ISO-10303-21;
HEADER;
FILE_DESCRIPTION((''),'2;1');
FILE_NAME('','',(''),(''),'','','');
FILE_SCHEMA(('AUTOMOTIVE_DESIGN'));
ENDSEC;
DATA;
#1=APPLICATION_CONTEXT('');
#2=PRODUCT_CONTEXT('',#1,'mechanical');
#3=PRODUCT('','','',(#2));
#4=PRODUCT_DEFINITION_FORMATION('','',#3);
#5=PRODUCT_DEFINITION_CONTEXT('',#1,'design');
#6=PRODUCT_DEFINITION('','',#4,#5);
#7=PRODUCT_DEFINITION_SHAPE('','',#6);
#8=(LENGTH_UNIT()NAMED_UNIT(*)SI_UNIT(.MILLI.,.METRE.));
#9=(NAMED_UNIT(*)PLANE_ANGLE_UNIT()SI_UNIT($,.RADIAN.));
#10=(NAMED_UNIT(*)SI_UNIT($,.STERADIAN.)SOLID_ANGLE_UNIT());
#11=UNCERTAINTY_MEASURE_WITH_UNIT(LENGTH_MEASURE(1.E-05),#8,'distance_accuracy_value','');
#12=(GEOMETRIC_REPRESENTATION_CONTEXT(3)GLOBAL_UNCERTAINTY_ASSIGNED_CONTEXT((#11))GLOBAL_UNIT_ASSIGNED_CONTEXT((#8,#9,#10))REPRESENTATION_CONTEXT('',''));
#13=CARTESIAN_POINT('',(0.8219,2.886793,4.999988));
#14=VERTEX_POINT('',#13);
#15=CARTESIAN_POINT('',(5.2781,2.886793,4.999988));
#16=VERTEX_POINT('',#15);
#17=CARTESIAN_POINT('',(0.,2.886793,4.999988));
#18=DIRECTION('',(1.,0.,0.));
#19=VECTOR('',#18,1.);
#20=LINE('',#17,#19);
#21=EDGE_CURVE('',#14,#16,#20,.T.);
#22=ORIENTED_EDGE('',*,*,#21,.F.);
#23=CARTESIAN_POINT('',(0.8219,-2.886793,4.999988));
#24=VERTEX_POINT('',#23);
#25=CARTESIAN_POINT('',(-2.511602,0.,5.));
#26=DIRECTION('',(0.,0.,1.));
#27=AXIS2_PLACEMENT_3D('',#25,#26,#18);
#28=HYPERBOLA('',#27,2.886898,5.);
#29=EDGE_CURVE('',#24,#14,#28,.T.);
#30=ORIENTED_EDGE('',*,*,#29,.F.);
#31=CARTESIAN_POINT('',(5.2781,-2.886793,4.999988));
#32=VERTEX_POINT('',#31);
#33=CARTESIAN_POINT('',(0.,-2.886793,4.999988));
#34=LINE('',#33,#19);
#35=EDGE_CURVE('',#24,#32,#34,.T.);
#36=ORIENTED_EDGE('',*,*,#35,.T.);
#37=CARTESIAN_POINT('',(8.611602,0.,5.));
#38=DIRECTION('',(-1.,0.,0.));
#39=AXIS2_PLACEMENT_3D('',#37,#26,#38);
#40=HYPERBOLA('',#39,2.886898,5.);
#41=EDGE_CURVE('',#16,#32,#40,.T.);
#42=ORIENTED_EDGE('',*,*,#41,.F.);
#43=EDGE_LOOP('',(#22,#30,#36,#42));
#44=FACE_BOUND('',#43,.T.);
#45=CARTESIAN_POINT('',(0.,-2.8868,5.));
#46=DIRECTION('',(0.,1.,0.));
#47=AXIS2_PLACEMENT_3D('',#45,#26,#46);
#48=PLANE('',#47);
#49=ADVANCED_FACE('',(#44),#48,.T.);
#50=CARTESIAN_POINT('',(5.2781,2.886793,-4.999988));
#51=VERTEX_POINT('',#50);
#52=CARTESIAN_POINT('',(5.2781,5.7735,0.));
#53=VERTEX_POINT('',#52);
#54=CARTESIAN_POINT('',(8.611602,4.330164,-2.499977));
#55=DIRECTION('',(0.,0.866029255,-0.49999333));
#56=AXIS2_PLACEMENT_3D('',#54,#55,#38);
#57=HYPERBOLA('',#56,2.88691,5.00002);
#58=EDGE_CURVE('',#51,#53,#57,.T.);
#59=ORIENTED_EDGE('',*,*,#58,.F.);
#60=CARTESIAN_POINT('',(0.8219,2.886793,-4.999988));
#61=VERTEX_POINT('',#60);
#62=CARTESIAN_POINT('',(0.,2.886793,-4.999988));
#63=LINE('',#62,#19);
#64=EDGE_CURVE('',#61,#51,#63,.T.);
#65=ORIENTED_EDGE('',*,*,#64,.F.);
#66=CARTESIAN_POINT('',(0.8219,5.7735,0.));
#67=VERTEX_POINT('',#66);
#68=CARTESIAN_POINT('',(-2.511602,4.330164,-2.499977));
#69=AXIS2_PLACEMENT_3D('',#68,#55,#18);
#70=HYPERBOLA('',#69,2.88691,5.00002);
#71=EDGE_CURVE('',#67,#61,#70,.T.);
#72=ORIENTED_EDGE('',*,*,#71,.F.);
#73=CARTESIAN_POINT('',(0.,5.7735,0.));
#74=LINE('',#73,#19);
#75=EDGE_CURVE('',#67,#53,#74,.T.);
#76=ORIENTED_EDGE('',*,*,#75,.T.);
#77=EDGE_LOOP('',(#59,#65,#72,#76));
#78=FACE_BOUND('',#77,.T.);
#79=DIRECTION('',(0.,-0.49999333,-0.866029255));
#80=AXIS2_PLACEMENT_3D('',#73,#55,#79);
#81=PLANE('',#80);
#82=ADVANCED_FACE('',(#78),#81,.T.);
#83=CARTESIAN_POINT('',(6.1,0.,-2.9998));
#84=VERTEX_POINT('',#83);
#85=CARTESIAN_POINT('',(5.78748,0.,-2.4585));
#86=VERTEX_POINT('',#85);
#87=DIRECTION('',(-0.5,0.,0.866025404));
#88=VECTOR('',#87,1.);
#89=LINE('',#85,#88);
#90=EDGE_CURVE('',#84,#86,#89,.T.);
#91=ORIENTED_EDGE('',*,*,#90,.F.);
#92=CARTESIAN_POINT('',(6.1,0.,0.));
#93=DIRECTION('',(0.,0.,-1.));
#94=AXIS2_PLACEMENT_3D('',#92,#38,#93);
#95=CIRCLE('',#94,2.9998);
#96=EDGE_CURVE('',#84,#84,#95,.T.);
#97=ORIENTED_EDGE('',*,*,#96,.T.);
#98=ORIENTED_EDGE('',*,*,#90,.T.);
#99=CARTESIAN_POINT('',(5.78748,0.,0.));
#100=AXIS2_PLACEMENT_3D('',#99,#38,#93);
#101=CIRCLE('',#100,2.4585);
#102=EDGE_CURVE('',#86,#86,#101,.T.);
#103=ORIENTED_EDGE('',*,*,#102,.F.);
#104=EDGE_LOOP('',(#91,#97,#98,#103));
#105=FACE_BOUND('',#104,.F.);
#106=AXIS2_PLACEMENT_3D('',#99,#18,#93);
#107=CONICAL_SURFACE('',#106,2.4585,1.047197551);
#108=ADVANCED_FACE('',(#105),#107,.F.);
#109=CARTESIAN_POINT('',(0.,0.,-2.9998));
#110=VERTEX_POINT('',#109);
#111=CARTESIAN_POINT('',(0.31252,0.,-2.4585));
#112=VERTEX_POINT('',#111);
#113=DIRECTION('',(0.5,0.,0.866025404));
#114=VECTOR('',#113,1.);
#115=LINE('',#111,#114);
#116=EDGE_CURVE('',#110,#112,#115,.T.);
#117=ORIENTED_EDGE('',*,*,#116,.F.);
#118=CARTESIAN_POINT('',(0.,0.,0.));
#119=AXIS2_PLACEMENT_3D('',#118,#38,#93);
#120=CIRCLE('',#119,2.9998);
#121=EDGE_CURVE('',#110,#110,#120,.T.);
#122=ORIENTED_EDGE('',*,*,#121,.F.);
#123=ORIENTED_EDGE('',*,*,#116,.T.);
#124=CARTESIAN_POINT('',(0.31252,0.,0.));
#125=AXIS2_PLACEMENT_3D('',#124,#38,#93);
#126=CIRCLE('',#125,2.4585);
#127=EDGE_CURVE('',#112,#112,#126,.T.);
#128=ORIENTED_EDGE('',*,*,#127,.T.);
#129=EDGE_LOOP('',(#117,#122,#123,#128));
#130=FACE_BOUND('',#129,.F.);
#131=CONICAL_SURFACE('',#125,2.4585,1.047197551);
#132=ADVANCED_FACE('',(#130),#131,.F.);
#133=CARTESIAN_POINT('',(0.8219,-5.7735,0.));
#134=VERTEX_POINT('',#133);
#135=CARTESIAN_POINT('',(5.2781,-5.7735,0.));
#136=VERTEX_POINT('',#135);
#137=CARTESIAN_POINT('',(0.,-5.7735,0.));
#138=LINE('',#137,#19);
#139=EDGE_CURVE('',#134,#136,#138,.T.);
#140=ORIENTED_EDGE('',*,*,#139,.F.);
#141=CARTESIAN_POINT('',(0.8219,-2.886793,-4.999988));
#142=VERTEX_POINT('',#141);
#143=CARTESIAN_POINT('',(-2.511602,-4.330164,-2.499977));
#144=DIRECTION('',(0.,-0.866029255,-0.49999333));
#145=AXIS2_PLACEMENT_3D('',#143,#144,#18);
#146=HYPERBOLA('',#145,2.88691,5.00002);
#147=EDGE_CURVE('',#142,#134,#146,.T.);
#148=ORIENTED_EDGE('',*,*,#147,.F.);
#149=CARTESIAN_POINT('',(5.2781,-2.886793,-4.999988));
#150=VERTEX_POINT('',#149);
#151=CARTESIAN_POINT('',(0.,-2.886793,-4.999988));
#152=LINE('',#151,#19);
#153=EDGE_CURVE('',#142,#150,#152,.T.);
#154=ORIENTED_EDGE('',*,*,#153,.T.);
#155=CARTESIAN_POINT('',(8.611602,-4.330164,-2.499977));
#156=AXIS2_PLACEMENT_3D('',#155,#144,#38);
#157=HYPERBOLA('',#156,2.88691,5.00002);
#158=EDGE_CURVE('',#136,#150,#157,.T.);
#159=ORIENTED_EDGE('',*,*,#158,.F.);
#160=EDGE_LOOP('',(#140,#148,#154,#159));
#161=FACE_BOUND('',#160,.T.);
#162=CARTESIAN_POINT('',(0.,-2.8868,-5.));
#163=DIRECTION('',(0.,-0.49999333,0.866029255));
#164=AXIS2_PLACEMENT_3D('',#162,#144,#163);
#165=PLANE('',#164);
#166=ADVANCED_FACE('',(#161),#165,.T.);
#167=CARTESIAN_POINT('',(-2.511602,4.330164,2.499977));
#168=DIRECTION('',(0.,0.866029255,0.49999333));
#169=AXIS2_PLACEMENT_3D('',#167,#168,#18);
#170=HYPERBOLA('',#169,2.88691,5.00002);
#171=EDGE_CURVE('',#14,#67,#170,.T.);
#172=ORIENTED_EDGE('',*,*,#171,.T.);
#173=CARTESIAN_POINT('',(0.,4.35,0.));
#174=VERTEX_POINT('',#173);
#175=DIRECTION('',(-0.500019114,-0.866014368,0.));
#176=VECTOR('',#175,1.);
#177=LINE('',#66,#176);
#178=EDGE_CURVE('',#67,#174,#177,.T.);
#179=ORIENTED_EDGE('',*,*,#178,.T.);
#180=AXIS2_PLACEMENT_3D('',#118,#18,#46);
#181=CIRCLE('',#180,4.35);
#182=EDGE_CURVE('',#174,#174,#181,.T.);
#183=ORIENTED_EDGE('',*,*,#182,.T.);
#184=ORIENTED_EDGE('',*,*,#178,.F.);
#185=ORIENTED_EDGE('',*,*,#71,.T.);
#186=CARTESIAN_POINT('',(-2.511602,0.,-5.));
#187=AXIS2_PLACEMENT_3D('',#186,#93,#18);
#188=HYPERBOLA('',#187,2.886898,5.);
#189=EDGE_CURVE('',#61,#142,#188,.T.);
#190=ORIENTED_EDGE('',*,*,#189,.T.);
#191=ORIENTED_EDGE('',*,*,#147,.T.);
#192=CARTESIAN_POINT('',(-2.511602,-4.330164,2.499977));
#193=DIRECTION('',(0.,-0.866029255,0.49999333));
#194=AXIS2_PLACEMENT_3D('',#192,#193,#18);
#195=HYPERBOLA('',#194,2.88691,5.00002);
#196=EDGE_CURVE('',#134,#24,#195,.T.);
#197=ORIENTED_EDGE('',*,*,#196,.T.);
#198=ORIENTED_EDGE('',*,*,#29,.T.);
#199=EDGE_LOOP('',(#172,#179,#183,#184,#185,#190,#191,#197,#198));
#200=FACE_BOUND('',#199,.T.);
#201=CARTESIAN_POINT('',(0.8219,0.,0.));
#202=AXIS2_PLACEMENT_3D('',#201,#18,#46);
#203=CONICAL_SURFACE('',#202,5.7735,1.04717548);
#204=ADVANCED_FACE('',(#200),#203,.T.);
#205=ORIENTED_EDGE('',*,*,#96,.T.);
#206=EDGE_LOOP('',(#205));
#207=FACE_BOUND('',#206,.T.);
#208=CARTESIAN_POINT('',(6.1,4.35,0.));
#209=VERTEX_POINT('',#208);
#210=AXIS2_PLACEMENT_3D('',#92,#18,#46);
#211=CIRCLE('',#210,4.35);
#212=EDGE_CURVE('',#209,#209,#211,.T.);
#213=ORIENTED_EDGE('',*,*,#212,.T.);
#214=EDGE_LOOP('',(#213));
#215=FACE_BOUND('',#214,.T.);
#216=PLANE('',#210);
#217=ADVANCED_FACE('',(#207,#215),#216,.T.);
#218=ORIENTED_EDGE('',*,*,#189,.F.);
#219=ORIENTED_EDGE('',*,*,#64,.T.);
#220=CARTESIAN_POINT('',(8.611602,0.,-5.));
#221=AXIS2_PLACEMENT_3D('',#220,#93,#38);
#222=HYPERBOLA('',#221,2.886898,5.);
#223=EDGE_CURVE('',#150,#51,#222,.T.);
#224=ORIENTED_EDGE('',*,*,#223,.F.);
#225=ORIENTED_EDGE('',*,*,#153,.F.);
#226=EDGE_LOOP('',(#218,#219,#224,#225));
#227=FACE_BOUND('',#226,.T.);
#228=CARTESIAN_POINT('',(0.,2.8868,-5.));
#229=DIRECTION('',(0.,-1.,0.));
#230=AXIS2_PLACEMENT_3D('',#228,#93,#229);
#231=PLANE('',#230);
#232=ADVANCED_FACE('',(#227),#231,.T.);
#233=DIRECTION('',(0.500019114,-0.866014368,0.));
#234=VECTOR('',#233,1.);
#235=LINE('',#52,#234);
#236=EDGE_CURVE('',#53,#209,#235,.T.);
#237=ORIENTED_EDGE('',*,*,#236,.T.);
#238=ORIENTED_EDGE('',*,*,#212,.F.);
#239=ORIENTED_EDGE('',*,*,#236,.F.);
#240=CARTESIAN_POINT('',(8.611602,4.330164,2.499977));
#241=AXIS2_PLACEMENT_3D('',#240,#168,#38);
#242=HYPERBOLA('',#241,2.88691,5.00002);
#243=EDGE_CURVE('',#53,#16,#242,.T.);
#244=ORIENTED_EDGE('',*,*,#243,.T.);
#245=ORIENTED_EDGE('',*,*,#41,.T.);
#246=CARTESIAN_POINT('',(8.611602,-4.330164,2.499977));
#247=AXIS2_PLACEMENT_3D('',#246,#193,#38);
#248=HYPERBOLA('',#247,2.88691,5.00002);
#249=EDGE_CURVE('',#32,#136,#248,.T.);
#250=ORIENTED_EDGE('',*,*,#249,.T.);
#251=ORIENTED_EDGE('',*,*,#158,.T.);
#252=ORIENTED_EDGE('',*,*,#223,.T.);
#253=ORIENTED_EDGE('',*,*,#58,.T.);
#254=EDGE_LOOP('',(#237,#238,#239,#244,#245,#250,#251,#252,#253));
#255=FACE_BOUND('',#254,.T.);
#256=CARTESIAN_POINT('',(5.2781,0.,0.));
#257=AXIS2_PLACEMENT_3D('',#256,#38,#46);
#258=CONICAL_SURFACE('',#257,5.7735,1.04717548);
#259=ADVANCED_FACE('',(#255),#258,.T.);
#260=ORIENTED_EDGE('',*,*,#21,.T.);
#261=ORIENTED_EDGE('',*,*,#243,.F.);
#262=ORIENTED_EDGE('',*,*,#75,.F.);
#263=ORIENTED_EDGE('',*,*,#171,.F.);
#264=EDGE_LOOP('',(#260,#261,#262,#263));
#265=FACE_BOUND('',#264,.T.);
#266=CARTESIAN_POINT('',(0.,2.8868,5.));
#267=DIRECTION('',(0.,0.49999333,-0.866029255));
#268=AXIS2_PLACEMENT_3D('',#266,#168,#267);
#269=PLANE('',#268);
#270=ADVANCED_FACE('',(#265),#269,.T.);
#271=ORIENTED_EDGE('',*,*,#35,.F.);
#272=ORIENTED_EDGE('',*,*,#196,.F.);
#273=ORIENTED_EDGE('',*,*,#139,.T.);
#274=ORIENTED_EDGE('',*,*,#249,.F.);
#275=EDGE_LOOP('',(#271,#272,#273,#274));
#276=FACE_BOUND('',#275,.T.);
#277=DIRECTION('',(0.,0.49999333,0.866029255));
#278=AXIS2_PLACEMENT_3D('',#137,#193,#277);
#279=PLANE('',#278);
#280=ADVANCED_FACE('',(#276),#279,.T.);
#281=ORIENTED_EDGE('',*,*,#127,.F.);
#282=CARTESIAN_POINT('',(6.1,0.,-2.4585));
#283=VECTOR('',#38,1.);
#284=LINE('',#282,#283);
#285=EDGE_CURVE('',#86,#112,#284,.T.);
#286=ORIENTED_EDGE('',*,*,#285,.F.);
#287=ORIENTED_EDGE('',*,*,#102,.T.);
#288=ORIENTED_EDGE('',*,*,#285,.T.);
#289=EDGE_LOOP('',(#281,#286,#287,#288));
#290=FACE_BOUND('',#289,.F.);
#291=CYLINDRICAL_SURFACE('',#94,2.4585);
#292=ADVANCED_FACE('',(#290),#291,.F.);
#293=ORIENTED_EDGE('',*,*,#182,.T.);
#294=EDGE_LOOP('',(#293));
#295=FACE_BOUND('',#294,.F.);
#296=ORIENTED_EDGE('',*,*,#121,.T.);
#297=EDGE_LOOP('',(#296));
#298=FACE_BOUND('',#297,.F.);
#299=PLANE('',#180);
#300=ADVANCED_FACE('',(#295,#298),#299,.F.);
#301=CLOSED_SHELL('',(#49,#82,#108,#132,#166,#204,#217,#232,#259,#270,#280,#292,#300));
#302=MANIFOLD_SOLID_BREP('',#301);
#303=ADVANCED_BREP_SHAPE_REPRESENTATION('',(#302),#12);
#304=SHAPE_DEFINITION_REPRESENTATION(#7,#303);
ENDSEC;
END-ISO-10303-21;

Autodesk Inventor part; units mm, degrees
ref_plane "YZ Plane" through (0, 0, 0) normal (1, 0, 0) x (0, 1, 0)
ref_plane "XZ Plane" through (0, 0, 0) normal (0, 1, 0) x (-1, 0, 0)
sketch "Sketch1" plane through (0, 0, 0) normal (1, 0, 0) x (0, 1, 0)
  line L0 (-5.7735, 0) -> (-2.8868, 5)
  line L1 (-2.8868, 5) -> (2.8868, 5)
  line L2 (2.8868, 5) -> (5.7735, 0)
  line L3 (5.7735, 0) -> (2.8868, -5)
  line L4 (2.8868, -5) -> (-2.8868, -5)
  line L5 (-2.8868, -5) -> (-5.7735, 0)
  point P0 (0, 0)
  point P1 (0, 0)
  dimension "d0" = 11.547
extrude "Body" add sketch "Sketch1" along normal blind 6.1
sketch "Sketch2" plane through (0, 0, 0) normal (0, 0, 1) x (1, 0, 0)
  line L0 (0, 2.8868) -> (0, 5.7735) projected
  line L1 (0, 5.7735) -> (6.1, 5.7735) projected
  line L2 (6.1, 2.8868) -> (6.1, 5.7735) projected
  line L3 (-1.22, 0) -> (7.32, 0) projected
  line L4 (0.8219, 5.7735) -> (0, 4.35)
  line L5 (5.2781, 5.7735) -> (6.1, 4.35)
  dimension "d3" = 30
  dimension "d4" = 30
  dimension "d5" = 8.7
  dimension "d6" = 8.7
revolve "Chamfer1" cut sketch "Sketch2" angle 360 about axis through (-10, 0, 0) along (1, 0, 0)
sketch "Sketch3" plane through (6.1, 0, 0) normal (1, 0, 0) x (0, 0, -1)
  arc A0 (-0.625, -1.0825) -> (0.625, -1.0825) centre (0, 0) ccw projected
hole "Thread" at (6.1, 0, 0) direction (-1, 0, 0) diameter 4.917 end through all thread size "M6x1" class "6H" standard "ISO Metric profile"
chamfer "Chamfer2" distance 0.5413 angle 30 1 edges at (6.1, 0, 2.4585) measured on face at (6.1, 3.6714, -0.4458)
chamfer "Chamfer3" distance 0.5413 angle 30 1 edges at (0, 0, 2.4585) measured on face at (0, 3.6714, -0.4458)
ref_plane "Work Plane1" through (-10.3567, 0, 0) normal (0, -0.8660254, -0.5) x (1, 0, 0)
equation "\"d0\" = 1.1547 * SW"
equation "\"d1\" = KOH"
equation "\"d3\" = ANG1"
equation "\"d4\" = ANG2"
equation "\"d5\" = SW0"
equation "\"d6\" = SW01"
equation "\"d8\" = -0.5 * GD1 + 0.5 * NND"
equation "\"d40\" = -0.5 * GD1 + 0.5 * NND"
equation "\"d10\" = -0.5 * GD1 + 0.5 * NND"
equation "\"d41\" = -0.5 * GD1 + 0.5 * NND"
equation "\"ANG1\" = 30deg"
equation "\"ANG2\" = 30deg"
equation "\"NND\" = 6"
equation "\"KOH\" = 6.1"
equation "\"SW0\" = 8.7"
equation "\"SW01\" = SW0"
equation "\"GUL\" = 0.541266 * PTC"
equation "\"THREADDIA\" = 6"
equation "\"TOA\" = 30deg"
equation "\"PTC\" = 1"
equation "\"E0\" = 1.155 * SW"
equation "\"GAL\" = 0.541266 * PTC"
equation "\"SW\" = 10"
equation "\"GD1\" = 4.917468"
properties part number "ISO 4034 - M6" material "Steel"
